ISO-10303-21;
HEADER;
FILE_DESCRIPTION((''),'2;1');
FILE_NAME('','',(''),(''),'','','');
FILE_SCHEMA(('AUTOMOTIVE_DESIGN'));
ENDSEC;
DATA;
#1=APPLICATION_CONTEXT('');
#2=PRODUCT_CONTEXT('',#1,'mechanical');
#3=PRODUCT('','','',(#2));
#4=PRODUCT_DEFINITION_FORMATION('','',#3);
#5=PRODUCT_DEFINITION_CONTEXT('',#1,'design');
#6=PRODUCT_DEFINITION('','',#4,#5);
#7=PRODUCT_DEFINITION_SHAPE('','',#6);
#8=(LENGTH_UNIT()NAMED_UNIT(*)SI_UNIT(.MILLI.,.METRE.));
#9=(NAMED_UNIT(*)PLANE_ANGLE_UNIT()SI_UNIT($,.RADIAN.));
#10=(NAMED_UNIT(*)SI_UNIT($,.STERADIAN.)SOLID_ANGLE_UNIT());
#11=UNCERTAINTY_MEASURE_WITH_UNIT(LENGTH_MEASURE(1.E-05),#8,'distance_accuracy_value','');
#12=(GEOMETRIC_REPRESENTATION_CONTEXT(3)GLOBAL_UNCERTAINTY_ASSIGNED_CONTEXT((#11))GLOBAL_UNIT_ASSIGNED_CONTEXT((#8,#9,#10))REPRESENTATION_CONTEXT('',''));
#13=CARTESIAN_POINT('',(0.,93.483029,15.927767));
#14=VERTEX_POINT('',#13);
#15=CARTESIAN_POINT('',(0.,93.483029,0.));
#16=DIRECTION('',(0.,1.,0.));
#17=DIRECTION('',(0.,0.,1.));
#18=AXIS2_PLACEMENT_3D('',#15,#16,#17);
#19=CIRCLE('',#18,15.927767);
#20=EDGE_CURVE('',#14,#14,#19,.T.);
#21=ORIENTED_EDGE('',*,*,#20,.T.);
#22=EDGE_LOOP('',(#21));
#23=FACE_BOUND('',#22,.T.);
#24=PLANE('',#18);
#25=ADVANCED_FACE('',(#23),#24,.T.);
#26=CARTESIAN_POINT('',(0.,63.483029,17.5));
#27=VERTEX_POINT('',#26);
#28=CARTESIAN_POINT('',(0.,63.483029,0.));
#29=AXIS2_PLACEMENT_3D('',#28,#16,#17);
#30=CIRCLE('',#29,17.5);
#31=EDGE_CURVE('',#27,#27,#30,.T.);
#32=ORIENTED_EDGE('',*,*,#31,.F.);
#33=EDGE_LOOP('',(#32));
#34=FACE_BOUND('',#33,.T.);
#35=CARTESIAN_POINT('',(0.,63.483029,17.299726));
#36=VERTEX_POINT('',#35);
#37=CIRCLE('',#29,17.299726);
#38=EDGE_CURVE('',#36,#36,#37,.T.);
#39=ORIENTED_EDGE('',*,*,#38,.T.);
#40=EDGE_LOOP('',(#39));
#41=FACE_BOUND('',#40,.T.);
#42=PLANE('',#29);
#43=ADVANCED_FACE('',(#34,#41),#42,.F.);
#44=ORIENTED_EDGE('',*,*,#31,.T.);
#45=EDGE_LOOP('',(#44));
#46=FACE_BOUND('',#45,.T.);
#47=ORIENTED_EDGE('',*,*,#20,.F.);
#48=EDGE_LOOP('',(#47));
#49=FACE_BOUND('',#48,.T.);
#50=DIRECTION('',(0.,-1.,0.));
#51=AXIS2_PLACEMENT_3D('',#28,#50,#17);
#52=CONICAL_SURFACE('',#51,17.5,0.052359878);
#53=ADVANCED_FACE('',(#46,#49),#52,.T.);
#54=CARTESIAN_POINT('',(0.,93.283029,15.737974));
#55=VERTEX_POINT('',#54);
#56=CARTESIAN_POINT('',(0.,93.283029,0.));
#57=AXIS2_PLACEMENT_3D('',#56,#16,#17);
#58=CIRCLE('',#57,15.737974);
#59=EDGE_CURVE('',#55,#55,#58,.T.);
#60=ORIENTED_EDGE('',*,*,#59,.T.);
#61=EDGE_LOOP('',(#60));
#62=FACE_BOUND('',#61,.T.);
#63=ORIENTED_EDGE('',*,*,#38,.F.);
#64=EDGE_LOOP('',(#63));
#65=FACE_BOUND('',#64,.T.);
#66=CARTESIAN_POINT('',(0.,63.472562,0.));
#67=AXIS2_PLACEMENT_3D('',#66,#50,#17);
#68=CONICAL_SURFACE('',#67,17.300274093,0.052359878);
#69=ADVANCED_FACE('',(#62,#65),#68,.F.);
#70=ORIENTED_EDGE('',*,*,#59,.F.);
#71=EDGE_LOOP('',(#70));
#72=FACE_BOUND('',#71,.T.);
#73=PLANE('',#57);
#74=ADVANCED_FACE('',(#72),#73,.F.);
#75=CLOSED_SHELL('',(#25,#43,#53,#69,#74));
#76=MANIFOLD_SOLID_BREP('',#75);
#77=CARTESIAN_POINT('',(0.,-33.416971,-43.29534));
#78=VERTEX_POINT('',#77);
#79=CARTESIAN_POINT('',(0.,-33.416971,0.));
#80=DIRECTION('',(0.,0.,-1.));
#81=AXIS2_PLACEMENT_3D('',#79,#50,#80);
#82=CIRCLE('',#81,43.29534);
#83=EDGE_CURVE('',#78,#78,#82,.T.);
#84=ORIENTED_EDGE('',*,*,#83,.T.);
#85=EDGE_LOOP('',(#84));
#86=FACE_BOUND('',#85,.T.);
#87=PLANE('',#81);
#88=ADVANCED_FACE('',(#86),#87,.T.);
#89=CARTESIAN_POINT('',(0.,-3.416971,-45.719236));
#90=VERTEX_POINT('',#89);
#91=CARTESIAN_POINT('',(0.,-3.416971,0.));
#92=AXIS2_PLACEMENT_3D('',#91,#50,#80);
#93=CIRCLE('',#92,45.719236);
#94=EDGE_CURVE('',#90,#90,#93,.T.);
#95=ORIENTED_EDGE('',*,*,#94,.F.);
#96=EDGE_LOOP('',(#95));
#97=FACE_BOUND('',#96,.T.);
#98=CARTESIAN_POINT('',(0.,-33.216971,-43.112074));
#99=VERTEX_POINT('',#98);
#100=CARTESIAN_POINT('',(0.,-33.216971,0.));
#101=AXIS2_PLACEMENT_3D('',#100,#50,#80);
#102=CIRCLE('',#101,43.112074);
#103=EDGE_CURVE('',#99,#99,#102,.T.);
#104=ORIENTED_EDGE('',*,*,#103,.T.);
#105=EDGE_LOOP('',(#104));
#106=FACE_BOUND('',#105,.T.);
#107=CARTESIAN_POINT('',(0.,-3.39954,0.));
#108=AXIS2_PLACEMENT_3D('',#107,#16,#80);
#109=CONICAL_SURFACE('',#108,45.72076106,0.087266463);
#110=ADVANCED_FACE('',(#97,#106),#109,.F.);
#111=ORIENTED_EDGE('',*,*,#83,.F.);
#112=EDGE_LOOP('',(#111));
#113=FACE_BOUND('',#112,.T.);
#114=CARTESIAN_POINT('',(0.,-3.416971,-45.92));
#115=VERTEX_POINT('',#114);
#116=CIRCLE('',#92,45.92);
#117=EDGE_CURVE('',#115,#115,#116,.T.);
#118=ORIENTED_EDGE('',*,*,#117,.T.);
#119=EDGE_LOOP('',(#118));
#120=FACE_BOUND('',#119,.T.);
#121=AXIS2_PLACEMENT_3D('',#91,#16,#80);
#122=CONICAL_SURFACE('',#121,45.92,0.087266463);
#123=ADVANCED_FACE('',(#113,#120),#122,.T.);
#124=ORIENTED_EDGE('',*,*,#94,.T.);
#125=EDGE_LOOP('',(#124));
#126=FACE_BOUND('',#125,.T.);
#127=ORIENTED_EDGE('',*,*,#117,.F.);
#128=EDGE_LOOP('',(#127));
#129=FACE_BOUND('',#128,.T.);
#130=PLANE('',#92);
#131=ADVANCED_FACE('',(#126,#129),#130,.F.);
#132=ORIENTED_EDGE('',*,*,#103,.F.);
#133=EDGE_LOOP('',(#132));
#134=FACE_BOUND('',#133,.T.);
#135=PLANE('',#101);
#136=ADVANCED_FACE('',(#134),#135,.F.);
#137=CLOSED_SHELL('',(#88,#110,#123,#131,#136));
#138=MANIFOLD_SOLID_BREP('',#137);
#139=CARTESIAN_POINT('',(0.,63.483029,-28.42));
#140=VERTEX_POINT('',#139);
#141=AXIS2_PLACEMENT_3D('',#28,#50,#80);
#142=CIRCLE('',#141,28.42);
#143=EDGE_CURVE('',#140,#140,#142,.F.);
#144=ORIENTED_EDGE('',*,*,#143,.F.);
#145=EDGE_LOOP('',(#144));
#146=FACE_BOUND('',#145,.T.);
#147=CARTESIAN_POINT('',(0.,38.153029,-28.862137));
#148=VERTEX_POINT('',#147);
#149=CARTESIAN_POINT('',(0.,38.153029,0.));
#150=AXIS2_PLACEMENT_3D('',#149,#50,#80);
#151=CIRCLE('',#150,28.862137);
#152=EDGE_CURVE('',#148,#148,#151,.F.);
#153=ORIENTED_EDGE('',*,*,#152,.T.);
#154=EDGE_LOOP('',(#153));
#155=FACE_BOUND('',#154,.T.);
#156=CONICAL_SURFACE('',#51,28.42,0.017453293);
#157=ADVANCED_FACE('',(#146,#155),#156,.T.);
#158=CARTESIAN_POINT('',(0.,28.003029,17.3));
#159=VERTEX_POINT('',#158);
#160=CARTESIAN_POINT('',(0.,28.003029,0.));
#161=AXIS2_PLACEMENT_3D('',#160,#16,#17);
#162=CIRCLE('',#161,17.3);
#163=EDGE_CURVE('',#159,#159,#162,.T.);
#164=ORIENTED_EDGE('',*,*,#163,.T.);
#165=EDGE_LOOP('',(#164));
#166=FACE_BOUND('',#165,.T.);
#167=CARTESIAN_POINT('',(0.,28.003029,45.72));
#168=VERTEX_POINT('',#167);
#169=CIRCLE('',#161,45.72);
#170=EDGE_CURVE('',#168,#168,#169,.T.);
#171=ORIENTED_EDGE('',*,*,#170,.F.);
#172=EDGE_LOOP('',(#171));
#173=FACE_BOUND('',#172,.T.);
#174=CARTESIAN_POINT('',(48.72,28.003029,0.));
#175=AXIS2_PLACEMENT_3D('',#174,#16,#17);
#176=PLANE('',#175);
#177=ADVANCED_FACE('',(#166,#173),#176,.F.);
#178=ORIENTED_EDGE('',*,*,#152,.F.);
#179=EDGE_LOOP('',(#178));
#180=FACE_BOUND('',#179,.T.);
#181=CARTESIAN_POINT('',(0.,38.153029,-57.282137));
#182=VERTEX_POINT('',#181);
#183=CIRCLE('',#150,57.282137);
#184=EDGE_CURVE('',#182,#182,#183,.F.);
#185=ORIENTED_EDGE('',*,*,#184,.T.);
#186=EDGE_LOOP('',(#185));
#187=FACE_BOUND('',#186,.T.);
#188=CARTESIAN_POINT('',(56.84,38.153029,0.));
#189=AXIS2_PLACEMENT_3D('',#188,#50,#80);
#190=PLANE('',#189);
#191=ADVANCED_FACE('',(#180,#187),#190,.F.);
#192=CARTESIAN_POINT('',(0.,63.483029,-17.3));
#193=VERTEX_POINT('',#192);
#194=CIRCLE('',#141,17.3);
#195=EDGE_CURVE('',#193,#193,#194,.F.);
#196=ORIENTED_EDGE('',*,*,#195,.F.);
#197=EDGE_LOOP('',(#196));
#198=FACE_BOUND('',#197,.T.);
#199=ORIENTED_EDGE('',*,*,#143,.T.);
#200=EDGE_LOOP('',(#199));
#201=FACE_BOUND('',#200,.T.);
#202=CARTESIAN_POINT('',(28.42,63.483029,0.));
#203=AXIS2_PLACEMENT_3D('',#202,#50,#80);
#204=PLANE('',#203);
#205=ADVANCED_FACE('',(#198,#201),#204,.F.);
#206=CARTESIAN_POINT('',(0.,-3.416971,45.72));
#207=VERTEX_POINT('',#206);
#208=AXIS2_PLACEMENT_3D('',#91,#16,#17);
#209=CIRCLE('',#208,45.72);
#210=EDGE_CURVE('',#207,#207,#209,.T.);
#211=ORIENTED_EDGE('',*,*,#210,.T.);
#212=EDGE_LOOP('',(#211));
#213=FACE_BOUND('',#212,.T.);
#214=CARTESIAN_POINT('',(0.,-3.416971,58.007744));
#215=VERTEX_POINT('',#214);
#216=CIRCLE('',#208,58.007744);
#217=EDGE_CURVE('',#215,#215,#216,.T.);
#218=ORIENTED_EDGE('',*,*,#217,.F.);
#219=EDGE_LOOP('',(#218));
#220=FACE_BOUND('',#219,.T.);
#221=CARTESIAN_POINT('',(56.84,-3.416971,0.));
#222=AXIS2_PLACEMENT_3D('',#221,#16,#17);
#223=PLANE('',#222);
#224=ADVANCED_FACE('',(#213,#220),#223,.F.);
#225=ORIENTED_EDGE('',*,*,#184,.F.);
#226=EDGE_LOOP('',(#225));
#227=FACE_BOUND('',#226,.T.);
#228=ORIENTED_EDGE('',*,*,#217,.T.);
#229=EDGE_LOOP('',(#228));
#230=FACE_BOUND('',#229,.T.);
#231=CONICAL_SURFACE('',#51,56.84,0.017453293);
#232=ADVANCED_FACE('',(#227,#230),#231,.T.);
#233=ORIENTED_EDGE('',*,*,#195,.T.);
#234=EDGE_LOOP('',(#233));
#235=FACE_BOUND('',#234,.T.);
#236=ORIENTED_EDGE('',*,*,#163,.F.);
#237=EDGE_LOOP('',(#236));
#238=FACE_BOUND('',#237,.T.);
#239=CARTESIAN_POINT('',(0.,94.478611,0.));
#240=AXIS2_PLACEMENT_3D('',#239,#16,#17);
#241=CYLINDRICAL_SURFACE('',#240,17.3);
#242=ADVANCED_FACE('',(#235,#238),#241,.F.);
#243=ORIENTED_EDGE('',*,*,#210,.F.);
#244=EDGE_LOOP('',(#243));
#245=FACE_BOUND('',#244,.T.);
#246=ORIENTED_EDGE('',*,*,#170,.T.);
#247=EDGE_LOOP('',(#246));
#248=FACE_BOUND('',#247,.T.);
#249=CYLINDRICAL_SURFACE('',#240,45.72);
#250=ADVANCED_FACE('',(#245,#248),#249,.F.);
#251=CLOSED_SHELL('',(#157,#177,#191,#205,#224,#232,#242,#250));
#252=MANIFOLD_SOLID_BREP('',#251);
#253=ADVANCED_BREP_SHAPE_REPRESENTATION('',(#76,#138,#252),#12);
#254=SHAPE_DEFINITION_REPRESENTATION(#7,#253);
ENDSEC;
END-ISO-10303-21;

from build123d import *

# Parameters (mm, degrees)
SCALE1_SCALE             = 1.015
MOVE_START               = -3.416970763
MOVE_FACE1_OUTLINE_R     = 56.84
MOVE_FACE1_OUTLINE_R_2   = 45.72
MOVE_FACE1_DEPTH         = 31.42
MOVE_START_2             = 28.003029237
MOVE_FACE1_2_OUTLINE_R   = 28.42
MOVE_FACE1_2_OUTLINE_R_2 = 17.3
MOVE_FACE1_2_DEPTH       = 35.48
SKETCH2_R                = 17.5
BOSS_EXTRUDE1_DEPTH      = 30
BOSS_EXTRUDE1_TAPER      = 3
SKETCH3_R                = 45.92
BOSS_EXTRUDE2_DEPTH      = 30
BOSS_EXTRUDE2_TAPER      = 5
SHELL1_T                 = -0.2
SHELL2_T                 = -0.2


# Read off the part's stored shape, not the designer's step: Move Face1, Draft1
with BuildPart() as part:
    # Sketch1 → Revolve1 (revolve)
    with BuildSketch(Plane.XY, mode=Mode.PRIVATE) as revolve1_sk:
        Polygon((56, 0), (48, 0), (48, 28), (20, 28), (20, 60), (28, 60), (28, 38), (56, 38), align=None)
    revolve(revolve1_sk.sketch.rotate(Axis((0, 93.493183641, 0), (0, -1, 0)), 90), axis=Axis((0, 93.493183641, 0), (0, -1, 0)))


with BuildPart() as part_1:
    # Scale1: scaled about (0, 27.798050893, 0)
    add(part.part.scale(SCALE1_SCALE).moved(Location((0, -0.416970763, 0))))

    # Move Face1 outline → Move Face1 (add)
    with BuildSketch(Plane(origin=(0, 0, 0), x_dir=(1, 0, 0), z_dir=(0, 1, 0)).offset(MOVE_START)):
        Circle(MOVE_FACE1_OUTLINE_R)
        Circle(MOVE_FACE1_OUTLINE_R_2, mode=Mode.SUBTRACT)
    extrude(amount=MOVE_FACE1_DEPTH)

    # Move Face1 2 outline → Move Face1 2 (add)
    with BuildSketch(Plane(origin=(0, 0, 0), x_dir=(1, 0, 0), z_dir=(0, 1, 0)).offset(MOVE_START_2)):
        Circle(MOVE_FACE1_2_OUTLINE_R)
        Circle(MOVE_FACE1_2_OUTLINE_R_2, mode=Mode.SUBTRACT)
    extrude(amount=MOVE_FACE1_2_DEPTH)

    # Draft1 outline → Draft1 (revolve)
    with BuildSketch(Plane.XY):
        Polygon((56.84, -3.416970763), (58.007743844, -3.416970763), (57.282136795, 38.153029237), (56.84, 38.153029237), align=None)
        Polygon((28.42, 38.153029237), (28.862136795, 38.153029237), (28.42, 63.483029237), align=None)
    revolve(axis=Axis((0, 0, 0), (0, 1, 0)))


with BuildPart() as body_2:
    # Sketch2 → Boss-Extrude1 (new body)
    with BuildSketch(Plane(origin=(0, 63.483029237, 0), x_dir=(1, 0, 0), z_dir=(0, 1, 0))):
        Circle(SKETCH2_R)
    extrude(amount=BOSS_EXTRUDE1_DEPTH, taper=BOSS_EXTRUDE1_TAPER)

    # Shell1
    shell1_openings = [body_2.faces().sort_by_distance(p)[0] for p in [
        (0, 63.483029237, 0),
    ]]
    offset(amount=SHELL1_T, openings=shell1_openings, kind=Kind.INTERSECTION)


with BuildPart() as body_3:
    # Sketch3 → Boss-Extrude2 (new body)
    with BuildSketch(Plane.XZ.offset(3.416970763)):
        Circle(SKETCH3_R)
    extrude(amount=BOSS_EXTRUDE2_DEPTH, taper=BOSS_EXTRUDE2_TAPER)

    # Shell2
    shell2_openings = [body_3.faces().sort_by_distance(p)[0] for p in [
        (0, -3.416970763, 0),
    ]]
    offset(amount=SHELL2_T, openings=shell2_openings, kind=Kind.INTERSECTION)


solid = Compound([part_1.part, body_2.part, body_3.part])
